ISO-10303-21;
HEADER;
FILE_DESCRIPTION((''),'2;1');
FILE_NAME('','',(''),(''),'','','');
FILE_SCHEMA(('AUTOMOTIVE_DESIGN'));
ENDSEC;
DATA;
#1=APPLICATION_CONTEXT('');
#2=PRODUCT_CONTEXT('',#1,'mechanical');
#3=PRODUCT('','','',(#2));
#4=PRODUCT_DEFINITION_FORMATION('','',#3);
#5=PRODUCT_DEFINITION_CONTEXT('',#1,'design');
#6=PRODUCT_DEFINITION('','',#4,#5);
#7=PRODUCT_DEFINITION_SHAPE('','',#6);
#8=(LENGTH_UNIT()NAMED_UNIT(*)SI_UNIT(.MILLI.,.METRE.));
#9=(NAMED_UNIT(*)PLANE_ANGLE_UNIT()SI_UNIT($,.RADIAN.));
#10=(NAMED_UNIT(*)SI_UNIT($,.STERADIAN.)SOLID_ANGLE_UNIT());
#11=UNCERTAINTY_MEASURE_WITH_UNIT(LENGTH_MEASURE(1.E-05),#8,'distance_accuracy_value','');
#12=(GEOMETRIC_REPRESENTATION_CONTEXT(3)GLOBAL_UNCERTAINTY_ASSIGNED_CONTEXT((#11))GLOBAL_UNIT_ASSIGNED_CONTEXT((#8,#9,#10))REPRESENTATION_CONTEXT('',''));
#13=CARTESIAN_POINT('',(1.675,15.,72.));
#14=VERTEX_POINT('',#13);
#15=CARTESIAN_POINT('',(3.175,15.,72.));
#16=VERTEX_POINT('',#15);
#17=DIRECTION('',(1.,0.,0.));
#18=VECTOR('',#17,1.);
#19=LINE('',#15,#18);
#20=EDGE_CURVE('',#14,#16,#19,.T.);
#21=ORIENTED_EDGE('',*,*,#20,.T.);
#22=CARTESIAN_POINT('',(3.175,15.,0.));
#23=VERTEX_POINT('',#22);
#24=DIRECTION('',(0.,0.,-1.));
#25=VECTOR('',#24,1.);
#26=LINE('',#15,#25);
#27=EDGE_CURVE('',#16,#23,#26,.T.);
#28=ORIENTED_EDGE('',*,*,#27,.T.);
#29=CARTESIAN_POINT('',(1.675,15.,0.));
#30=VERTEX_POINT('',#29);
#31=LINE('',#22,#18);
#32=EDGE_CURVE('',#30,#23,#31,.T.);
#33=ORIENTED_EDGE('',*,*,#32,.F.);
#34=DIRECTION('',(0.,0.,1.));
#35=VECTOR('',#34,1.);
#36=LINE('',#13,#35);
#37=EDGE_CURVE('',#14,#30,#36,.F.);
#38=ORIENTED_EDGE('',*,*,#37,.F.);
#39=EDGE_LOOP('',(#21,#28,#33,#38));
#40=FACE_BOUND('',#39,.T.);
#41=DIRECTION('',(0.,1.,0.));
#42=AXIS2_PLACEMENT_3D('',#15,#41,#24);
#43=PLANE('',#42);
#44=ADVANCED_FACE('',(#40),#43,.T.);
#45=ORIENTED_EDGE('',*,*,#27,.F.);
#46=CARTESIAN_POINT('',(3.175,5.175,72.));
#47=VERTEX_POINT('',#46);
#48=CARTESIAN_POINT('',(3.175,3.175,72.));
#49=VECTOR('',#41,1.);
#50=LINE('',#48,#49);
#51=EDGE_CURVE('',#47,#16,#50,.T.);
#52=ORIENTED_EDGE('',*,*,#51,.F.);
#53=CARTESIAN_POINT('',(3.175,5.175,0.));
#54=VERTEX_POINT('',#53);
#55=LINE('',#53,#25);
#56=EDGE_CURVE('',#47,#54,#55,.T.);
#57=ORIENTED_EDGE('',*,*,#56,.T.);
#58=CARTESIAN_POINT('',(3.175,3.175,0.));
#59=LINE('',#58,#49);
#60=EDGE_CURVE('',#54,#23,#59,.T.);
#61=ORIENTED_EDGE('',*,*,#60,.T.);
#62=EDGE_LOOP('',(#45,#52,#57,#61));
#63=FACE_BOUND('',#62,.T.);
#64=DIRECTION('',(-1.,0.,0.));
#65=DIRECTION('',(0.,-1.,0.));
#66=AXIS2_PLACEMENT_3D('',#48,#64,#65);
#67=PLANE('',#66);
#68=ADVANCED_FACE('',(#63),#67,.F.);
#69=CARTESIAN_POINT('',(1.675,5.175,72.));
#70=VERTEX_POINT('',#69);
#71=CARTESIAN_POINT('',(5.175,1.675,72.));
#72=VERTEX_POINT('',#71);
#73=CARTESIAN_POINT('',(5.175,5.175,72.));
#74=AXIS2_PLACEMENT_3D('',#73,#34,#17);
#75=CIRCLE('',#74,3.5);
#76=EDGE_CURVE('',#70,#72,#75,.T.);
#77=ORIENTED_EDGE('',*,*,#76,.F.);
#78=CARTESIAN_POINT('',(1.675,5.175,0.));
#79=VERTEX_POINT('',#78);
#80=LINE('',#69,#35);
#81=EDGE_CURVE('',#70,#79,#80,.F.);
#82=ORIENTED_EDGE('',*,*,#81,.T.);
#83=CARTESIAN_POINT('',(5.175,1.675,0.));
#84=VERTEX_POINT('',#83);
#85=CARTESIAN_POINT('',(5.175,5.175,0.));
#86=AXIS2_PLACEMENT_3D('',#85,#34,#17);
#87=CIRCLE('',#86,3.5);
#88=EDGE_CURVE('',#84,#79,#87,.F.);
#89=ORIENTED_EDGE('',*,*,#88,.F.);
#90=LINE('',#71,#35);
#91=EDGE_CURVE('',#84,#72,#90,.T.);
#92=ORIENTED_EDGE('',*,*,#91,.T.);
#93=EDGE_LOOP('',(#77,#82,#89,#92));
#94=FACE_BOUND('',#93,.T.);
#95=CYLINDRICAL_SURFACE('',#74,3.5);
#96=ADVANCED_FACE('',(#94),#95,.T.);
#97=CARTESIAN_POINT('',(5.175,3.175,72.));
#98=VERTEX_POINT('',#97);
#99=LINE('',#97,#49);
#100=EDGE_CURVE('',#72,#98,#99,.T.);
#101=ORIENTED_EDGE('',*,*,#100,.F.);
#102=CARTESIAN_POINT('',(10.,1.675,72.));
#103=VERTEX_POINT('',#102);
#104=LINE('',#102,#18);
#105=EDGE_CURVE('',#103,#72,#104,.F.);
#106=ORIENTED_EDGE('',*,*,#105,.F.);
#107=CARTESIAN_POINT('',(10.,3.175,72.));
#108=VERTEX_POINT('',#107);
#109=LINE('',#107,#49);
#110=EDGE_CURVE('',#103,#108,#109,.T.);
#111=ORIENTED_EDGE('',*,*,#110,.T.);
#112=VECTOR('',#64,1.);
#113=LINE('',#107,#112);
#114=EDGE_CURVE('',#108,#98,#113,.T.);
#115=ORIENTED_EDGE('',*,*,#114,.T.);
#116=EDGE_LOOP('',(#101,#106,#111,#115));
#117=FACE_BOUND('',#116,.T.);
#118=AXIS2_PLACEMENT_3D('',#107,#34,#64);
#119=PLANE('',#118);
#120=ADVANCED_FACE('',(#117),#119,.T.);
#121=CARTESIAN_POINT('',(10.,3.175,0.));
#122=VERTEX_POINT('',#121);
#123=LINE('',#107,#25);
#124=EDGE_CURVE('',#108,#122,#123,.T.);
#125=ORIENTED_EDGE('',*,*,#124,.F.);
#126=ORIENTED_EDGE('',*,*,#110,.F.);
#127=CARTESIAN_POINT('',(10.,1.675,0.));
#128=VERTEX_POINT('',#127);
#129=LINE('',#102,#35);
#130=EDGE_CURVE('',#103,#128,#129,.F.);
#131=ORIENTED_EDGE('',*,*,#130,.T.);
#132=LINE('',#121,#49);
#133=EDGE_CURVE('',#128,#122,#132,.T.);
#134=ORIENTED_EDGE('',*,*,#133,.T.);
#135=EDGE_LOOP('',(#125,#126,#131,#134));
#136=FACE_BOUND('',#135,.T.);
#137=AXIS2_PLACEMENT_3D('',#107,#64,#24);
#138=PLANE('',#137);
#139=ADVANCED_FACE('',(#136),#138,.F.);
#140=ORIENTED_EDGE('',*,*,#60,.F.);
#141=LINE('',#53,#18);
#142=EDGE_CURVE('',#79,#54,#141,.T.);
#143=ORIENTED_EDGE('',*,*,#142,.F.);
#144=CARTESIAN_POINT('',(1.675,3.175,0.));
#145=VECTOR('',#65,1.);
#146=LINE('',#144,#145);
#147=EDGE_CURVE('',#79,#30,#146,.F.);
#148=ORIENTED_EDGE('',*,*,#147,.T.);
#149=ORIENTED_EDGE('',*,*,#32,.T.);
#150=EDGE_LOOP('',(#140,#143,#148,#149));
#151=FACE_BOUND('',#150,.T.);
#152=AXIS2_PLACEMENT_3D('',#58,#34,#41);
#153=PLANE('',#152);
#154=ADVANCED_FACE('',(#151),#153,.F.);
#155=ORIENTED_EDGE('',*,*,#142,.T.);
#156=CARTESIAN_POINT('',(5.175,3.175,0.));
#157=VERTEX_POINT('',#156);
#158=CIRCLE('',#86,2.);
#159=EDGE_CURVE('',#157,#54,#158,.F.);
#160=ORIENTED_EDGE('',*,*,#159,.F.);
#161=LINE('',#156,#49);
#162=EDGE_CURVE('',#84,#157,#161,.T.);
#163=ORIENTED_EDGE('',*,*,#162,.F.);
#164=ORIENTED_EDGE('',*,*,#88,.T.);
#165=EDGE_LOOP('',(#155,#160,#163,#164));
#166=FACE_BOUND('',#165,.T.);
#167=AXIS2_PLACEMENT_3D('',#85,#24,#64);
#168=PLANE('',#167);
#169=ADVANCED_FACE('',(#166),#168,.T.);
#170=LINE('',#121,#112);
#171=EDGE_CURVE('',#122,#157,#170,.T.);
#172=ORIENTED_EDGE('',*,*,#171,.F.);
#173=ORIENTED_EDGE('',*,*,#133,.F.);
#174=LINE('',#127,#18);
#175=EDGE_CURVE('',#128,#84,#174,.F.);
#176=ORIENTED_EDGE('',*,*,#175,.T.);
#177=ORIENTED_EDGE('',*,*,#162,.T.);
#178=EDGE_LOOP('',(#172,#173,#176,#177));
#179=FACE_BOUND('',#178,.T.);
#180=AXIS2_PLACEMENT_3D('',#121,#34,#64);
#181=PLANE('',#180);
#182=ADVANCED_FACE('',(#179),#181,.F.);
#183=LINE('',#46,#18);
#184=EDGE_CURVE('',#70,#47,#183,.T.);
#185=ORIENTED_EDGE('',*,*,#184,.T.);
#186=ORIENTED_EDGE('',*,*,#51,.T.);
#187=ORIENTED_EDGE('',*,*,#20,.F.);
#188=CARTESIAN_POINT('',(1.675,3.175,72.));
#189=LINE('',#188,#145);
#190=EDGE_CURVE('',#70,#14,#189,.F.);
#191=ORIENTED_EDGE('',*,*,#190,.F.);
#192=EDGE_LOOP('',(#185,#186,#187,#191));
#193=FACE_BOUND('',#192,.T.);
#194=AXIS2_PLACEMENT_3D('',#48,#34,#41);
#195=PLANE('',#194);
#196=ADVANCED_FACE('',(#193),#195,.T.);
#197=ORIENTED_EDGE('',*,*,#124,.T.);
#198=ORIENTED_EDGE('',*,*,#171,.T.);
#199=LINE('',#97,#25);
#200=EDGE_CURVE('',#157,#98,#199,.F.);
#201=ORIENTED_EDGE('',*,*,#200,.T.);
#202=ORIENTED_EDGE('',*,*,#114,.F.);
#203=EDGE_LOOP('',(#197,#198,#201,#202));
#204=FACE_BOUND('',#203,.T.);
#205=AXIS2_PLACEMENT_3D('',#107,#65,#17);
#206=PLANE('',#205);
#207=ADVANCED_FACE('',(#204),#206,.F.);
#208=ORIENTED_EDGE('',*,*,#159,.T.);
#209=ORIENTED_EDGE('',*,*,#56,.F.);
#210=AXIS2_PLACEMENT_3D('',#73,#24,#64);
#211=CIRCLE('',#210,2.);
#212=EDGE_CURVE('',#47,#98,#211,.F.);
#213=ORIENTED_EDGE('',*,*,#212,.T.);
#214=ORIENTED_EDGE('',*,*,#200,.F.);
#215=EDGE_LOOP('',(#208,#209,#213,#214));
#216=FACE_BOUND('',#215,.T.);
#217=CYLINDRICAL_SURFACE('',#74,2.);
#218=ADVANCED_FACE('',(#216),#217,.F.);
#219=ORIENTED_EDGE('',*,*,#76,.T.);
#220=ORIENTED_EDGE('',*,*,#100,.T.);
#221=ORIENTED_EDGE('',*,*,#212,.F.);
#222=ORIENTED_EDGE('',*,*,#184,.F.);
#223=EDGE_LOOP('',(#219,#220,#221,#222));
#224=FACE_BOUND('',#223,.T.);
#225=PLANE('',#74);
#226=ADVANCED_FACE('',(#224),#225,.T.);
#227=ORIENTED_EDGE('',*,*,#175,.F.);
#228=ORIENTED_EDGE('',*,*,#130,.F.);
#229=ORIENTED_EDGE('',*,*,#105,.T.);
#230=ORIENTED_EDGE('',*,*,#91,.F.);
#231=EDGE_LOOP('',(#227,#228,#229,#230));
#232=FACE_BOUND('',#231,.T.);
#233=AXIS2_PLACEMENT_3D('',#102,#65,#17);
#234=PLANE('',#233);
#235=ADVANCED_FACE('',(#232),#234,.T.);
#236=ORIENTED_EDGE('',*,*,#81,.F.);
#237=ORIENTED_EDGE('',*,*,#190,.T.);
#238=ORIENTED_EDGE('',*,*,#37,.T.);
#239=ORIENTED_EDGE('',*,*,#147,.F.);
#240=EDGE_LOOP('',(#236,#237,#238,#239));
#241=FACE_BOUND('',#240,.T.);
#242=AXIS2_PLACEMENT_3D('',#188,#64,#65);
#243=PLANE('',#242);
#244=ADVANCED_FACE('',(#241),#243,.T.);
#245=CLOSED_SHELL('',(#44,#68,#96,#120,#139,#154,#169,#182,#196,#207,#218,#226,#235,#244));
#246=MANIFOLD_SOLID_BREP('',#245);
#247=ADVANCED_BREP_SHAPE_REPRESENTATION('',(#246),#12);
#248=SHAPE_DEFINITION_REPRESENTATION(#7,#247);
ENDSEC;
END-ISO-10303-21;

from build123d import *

# Parameters (mm, degrees)
BOSS_EXTRUDE1_DEPTH    = 72
CONVERT_SOLID1_DEPTH   = 72
CONVERT_SOLID1_2_DEPTH = 72


# Read off the part's stored shape, not the designer's step: Convert-Solid1
with BuildPart() as part:
    # Sketch1 → Boss-Extrude1 (new body)
    with BuildSketch(Plane.XY):
        Polygon((0, 15), (0, 0), (10, 0), (10, 3.175), (3.175, 3.175), (3.175, 15), align=None)
    extrude(amount=BOSS_EXTRUDE1_DEPTH)

    # Convert-Solid1 outline → Convert-Solid1 (cut)
    with BuildSketch(Plane.XY):
        with BuildLine():
            Line((1.675, 5.175), (1.675, 15))
            Line((1.675, 15), (0, 15))
            Line((0, 15), (0, 0))
            Line((0, 0), (10, 0))
            Line((10, 0), (10, 1.675))
            Line((10, 1.675), (5.175, 1.675))
            ThreePointArc((5.175, 1.675), (2.700126266, 2.700126266), (1.675, 5.175))
        make_face()
    extrude(amount=CONVERT_SOLID1_DEPTH, mode=Mode.SUBTRACT)

    # Convert-Solid1 2 outline → Convert-Solid1 2 (add)
    with BuildSketch(Plane.XY):
        with BuildLine():
            ThreePointArc((5.175, 3.175), (3.760786438, 3.760786438), (3.175, 5.175))
            Line((3.175, 5.175), (3.175, 3.175))
            Line((3.175, 3.175), (5.175, 3.175))
        make_face()
    extrude(amount=CONVERT_SOLID1_2_DEPTH)


solid = part.part
